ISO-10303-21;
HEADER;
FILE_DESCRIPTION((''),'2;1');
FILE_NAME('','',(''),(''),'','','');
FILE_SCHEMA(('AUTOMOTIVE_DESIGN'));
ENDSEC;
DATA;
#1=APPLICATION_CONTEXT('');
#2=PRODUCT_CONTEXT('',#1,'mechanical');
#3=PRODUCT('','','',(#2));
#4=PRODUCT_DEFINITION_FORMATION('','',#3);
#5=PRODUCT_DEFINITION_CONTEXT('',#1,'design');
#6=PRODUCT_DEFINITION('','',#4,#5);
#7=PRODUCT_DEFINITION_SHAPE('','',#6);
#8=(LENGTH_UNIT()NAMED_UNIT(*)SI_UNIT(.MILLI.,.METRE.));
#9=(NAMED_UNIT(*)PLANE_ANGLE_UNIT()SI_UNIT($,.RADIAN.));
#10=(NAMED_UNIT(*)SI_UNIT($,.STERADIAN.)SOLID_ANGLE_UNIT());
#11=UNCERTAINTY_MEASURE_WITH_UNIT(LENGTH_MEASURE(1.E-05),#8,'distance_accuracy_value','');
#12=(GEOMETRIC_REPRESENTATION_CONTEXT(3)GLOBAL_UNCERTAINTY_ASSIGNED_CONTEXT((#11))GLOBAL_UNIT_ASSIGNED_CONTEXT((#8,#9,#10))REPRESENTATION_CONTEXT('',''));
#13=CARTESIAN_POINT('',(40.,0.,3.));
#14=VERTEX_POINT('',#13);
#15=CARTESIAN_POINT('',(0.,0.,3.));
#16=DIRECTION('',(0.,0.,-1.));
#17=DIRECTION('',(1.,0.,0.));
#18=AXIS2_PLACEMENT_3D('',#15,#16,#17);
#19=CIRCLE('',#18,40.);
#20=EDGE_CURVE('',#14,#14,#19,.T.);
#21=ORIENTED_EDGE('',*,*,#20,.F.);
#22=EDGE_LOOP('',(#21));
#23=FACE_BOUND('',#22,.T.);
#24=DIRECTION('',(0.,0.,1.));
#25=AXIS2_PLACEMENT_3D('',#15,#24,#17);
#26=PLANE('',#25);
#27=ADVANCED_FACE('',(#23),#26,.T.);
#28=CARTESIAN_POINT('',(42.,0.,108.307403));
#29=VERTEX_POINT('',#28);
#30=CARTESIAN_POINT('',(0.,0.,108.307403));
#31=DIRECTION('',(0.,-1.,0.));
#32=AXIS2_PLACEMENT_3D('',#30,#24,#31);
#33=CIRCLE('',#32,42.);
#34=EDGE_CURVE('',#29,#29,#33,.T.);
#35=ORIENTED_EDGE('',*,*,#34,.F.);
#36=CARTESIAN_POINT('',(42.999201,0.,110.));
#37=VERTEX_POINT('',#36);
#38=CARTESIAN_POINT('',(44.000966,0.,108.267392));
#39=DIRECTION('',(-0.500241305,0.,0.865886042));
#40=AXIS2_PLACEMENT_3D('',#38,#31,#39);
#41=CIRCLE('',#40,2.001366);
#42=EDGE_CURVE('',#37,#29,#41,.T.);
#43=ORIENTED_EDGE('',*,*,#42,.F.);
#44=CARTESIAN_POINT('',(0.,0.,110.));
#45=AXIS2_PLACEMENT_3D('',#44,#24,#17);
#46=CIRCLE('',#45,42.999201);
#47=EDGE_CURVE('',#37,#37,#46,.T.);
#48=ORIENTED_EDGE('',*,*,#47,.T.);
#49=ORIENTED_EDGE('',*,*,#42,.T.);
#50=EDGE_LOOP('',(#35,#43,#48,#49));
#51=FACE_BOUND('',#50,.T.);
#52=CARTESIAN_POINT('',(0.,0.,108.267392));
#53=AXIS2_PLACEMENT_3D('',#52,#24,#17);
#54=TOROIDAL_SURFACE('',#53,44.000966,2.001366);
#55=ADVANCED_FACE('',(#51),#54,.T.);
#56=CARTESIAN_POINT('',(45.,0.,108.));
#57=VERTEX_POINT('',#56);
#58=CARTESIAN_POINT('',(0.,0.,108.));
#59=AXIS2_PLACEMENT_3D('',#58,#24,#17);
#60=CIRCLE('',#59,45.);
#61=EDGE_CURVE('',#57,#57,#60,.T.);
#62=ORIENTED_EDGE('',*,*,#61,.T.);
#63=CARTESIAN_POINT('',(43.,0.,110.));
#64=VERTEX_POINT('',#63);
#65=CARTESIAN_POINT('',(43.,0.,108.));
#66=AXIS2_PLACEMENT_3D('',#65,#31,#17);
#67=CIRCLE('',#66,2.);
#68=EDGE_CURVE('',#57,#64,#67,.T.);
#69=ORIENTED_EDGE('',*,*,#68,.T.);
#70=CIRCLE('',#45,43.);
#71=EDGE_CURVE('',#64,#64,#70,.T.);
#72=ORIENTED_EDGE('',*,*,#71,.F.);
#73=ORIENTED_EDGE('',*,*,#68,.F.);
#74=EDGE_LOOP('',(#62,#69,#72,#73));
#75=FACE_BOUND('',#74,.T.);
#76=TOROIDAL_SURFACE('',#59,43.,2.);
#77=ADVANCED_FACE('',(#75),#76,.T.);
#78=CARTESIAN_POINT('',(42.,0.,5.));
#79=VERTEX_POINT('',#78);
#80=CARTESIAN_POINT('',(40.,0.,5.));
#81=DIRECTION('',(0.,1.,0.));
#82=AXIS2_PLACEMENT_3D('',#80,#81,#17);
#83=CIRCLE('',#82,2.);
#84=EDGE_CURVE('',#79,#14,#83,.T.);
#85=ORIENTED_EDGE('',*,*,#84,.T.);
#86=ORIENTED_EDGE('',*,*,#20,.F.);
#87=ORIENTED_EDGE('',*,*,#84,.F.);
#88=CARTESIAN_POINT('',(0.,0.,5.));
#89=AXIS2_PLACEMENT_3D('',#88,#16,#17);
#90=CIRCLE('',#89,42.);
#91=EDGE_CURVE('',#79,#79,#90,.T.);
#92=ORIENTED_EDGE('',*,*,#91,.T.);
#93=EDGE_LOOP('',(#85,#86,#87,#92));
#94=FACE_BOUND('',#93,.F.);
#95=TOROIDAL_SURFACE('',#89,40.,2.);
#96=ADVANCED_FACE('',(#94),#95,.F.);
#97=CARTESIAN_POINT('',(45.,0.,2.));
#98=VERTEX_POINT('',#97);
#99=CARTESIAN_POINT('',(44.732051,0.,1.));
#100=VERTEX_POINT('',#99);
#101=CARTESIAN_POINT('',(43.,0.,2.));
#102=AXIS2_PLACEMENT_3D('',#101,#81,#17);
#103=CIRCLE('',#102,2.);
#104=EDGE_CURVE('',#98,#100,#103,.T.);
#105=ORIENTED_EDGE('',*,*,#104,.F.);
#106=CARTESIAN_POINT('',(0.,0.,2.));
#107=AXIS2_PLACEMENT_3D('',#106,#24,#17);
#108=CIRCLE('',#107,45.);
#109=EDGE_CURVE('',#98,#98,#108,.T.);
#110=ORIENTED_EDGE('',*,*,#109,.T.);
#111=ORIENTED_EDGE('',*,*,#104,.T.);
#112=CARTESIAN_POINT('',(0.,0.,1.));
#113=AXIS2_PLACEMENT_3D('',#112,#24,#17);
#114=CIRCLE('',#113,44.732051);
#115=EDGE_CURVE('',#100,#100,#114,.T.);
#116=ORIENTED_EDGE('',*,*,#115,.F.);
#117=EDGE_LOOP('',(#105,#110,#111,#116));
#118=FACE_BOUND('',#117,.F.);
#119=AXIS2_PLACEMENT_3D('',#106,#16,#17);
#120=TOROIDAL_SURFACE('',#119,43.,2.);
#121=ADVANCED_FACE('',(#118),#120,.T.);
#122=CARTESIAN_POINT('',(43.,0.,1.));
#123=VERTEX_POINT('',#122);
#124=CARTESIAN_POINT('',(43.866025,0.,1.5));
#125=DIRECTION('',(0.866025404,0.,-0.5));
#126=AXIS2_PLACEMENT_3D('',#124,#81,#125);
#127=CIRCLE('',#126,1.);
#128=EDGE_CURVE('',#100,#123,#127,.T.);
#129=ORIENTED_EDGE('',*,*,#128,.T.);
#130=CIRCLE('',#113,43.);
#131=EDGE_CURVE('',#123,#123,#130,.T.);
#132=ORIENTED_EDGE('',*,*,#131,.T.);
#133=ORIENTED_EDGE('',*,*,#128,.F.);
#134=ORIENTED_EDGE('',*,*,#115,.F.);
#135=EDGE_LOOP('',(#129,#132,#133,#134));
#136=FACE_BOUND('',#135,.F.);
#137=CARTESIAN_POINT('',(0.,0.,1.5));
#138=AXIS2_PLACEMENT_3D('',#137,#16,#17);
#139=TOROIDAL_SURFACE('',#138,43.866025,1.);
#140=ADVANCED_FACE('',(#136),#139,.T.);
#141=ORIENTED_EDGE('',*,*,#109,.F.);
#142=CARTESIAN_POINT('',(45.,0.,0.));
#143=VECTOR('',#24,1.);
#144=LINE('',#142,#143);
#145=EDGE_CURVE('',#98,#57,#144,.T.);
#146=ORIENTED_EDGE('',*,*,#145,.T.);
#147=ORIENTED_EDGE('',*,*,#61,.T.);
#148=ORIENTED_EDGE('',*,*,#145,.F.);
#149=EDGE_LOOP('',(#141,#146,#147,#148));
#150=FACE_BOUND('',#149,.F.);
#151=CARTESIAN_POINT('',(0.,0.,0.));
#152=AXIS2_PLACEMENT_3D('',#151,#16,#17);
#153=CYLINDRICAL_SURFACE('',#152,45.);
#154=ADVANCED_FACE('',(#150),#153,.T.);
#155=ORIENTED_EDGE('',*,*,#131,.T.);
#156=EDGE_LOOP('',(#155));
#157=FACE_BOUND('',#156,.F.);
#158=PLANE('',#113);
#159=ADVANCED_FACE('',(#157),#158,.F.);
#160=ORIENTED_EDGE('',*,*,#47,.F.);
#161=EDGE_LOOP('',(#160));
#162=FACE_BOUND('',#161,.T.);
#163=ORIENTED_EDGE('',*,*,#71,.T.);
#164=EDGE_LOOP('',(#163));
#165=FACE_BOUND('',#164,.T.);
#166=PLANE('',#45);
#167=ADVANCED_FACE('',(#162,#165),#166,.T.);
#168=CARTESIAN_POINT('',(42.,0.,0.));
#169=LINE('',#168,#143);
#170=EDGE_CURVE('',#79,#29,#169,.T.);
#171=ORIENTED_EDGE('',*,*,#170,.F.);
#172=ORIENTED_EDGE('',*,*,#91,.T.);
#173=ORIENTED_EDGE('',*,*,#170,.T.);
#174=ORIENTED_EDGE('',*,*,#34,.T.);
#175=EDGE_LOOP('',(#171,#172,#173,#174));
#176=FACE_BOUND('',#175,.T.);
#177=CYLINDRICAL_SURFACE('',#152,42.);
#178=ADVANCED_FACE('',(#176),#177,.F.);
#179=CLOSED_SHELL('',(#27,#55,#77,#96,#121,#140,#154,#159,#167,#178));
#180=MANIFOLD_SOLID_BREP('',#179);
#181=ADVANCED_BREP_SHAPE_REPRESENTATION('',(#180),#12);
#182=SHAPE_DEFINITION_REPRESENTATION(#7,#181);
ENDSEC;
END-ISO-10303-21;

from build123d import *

# Parameters (mm, degrees)
F0_R     = 45
F1_DEPTH = 110
F2_T     = -3
F3_R     = 2
F4_R     = 2
F5_R     = 2
F7_DEPTH = 1


# Not quite as in the source:
# - a fillet or chamfer that OpenCascade refuses, or shapes differently, is made with other operations: its cross-section is extruded or revolved along the edge and cut away or added


with BuildPart() as f1:
    # F0 (on Top) → F1 (new body)
    with BuildSketch(Plane.XY):
        Circle(F0_R)
    extrude(amount=F1_DEPTH)

    # F2
    f2_openings = [f1.faces().sort_by_distance(p)[0] for p in [
        (0, 0, 110),
    ]]
    offset(amount=F2_T, openings=f2_openings)

    # F3
    f3_edges = [f1.edges().sort_by_distance(p)[0] for p in [
        (-42, 0, 3),
    ]]
    fillet(f3_edges, radius=F3_R)

    # F4
    f4_edges = [f1.edges().sort_by_distance(p)[0] for p in [
        (-45, 0, 0),
    ]]
    fillet(f4_edges, radius=F4_R)

    # F5
    f5_edges = [f1.edges().sort_by_distance(p)[0] for p in [
        (-45, 0, 110),
    ]]
    fillet(f5_edges, radius=F5_R)

    # F6: fillet of radius 2 on 1 edges, made by hand

    # F6_s1 → F6_t2 (revolve, cut)
    with BuildSketch(Plane.XZ):
        with BuildLine():
            ThreePointArc((42.9997999035, 110.0003463544), (42.2675927526, 109.2678330874), (41.9996, 108.2673917434))
            Line((41.9996, 108.2673917434), (41.7994634315, 108.2673917434))
            ThreePointArc((41.7994634315, 108.2673917434), (41.7998634315, 109.1336958717), (41.7998634315, 110))
            Line((41.7998634315, 110), (42, 110.2001365685))
            ThreePointArc((42, 110.2001365685), (42.4998999517, 110.2001365685), (42.8996833253, 110.1736418155))
            Line((42.8996833253, 110.1736418155), (42.9997999035, 110.0003463544))
        make_face()
    revolve(axis=Axis((0, 0, 110), (0, 0, 1)), mode=Mode.SUBTRACT)

    # F7 (cut): a face of the model
    f7_faces = [f1.faces().sort_by_distance(p)[0] for p in [
        (0, 0, 0),
    ]]
    extrude(f7_faces, amount=-F7_DEPTH, mode=Mode.SUBTRACT)

    # F8: fillet of radius 1 on 1 edges, made by hand

    # F8_s1 → F8_t2 (revolve, cut)
    with BuildSketch(Plane.XZ):
        with BuildLine():
            ThreePointArc((44.7320508076, 1), (43.8660254038, 0.5), (43, 1))
            Line((43, 1), (43, 0))
            ThreePointArc((43, 0), (44, 0.2679491924), (44.7320508076, 1))
        make_face()
    revolve(axis=Axis((0, 0, 0), (0, 0, 1)), mode=Mode.SUBTRACT)


solid = f1.part
